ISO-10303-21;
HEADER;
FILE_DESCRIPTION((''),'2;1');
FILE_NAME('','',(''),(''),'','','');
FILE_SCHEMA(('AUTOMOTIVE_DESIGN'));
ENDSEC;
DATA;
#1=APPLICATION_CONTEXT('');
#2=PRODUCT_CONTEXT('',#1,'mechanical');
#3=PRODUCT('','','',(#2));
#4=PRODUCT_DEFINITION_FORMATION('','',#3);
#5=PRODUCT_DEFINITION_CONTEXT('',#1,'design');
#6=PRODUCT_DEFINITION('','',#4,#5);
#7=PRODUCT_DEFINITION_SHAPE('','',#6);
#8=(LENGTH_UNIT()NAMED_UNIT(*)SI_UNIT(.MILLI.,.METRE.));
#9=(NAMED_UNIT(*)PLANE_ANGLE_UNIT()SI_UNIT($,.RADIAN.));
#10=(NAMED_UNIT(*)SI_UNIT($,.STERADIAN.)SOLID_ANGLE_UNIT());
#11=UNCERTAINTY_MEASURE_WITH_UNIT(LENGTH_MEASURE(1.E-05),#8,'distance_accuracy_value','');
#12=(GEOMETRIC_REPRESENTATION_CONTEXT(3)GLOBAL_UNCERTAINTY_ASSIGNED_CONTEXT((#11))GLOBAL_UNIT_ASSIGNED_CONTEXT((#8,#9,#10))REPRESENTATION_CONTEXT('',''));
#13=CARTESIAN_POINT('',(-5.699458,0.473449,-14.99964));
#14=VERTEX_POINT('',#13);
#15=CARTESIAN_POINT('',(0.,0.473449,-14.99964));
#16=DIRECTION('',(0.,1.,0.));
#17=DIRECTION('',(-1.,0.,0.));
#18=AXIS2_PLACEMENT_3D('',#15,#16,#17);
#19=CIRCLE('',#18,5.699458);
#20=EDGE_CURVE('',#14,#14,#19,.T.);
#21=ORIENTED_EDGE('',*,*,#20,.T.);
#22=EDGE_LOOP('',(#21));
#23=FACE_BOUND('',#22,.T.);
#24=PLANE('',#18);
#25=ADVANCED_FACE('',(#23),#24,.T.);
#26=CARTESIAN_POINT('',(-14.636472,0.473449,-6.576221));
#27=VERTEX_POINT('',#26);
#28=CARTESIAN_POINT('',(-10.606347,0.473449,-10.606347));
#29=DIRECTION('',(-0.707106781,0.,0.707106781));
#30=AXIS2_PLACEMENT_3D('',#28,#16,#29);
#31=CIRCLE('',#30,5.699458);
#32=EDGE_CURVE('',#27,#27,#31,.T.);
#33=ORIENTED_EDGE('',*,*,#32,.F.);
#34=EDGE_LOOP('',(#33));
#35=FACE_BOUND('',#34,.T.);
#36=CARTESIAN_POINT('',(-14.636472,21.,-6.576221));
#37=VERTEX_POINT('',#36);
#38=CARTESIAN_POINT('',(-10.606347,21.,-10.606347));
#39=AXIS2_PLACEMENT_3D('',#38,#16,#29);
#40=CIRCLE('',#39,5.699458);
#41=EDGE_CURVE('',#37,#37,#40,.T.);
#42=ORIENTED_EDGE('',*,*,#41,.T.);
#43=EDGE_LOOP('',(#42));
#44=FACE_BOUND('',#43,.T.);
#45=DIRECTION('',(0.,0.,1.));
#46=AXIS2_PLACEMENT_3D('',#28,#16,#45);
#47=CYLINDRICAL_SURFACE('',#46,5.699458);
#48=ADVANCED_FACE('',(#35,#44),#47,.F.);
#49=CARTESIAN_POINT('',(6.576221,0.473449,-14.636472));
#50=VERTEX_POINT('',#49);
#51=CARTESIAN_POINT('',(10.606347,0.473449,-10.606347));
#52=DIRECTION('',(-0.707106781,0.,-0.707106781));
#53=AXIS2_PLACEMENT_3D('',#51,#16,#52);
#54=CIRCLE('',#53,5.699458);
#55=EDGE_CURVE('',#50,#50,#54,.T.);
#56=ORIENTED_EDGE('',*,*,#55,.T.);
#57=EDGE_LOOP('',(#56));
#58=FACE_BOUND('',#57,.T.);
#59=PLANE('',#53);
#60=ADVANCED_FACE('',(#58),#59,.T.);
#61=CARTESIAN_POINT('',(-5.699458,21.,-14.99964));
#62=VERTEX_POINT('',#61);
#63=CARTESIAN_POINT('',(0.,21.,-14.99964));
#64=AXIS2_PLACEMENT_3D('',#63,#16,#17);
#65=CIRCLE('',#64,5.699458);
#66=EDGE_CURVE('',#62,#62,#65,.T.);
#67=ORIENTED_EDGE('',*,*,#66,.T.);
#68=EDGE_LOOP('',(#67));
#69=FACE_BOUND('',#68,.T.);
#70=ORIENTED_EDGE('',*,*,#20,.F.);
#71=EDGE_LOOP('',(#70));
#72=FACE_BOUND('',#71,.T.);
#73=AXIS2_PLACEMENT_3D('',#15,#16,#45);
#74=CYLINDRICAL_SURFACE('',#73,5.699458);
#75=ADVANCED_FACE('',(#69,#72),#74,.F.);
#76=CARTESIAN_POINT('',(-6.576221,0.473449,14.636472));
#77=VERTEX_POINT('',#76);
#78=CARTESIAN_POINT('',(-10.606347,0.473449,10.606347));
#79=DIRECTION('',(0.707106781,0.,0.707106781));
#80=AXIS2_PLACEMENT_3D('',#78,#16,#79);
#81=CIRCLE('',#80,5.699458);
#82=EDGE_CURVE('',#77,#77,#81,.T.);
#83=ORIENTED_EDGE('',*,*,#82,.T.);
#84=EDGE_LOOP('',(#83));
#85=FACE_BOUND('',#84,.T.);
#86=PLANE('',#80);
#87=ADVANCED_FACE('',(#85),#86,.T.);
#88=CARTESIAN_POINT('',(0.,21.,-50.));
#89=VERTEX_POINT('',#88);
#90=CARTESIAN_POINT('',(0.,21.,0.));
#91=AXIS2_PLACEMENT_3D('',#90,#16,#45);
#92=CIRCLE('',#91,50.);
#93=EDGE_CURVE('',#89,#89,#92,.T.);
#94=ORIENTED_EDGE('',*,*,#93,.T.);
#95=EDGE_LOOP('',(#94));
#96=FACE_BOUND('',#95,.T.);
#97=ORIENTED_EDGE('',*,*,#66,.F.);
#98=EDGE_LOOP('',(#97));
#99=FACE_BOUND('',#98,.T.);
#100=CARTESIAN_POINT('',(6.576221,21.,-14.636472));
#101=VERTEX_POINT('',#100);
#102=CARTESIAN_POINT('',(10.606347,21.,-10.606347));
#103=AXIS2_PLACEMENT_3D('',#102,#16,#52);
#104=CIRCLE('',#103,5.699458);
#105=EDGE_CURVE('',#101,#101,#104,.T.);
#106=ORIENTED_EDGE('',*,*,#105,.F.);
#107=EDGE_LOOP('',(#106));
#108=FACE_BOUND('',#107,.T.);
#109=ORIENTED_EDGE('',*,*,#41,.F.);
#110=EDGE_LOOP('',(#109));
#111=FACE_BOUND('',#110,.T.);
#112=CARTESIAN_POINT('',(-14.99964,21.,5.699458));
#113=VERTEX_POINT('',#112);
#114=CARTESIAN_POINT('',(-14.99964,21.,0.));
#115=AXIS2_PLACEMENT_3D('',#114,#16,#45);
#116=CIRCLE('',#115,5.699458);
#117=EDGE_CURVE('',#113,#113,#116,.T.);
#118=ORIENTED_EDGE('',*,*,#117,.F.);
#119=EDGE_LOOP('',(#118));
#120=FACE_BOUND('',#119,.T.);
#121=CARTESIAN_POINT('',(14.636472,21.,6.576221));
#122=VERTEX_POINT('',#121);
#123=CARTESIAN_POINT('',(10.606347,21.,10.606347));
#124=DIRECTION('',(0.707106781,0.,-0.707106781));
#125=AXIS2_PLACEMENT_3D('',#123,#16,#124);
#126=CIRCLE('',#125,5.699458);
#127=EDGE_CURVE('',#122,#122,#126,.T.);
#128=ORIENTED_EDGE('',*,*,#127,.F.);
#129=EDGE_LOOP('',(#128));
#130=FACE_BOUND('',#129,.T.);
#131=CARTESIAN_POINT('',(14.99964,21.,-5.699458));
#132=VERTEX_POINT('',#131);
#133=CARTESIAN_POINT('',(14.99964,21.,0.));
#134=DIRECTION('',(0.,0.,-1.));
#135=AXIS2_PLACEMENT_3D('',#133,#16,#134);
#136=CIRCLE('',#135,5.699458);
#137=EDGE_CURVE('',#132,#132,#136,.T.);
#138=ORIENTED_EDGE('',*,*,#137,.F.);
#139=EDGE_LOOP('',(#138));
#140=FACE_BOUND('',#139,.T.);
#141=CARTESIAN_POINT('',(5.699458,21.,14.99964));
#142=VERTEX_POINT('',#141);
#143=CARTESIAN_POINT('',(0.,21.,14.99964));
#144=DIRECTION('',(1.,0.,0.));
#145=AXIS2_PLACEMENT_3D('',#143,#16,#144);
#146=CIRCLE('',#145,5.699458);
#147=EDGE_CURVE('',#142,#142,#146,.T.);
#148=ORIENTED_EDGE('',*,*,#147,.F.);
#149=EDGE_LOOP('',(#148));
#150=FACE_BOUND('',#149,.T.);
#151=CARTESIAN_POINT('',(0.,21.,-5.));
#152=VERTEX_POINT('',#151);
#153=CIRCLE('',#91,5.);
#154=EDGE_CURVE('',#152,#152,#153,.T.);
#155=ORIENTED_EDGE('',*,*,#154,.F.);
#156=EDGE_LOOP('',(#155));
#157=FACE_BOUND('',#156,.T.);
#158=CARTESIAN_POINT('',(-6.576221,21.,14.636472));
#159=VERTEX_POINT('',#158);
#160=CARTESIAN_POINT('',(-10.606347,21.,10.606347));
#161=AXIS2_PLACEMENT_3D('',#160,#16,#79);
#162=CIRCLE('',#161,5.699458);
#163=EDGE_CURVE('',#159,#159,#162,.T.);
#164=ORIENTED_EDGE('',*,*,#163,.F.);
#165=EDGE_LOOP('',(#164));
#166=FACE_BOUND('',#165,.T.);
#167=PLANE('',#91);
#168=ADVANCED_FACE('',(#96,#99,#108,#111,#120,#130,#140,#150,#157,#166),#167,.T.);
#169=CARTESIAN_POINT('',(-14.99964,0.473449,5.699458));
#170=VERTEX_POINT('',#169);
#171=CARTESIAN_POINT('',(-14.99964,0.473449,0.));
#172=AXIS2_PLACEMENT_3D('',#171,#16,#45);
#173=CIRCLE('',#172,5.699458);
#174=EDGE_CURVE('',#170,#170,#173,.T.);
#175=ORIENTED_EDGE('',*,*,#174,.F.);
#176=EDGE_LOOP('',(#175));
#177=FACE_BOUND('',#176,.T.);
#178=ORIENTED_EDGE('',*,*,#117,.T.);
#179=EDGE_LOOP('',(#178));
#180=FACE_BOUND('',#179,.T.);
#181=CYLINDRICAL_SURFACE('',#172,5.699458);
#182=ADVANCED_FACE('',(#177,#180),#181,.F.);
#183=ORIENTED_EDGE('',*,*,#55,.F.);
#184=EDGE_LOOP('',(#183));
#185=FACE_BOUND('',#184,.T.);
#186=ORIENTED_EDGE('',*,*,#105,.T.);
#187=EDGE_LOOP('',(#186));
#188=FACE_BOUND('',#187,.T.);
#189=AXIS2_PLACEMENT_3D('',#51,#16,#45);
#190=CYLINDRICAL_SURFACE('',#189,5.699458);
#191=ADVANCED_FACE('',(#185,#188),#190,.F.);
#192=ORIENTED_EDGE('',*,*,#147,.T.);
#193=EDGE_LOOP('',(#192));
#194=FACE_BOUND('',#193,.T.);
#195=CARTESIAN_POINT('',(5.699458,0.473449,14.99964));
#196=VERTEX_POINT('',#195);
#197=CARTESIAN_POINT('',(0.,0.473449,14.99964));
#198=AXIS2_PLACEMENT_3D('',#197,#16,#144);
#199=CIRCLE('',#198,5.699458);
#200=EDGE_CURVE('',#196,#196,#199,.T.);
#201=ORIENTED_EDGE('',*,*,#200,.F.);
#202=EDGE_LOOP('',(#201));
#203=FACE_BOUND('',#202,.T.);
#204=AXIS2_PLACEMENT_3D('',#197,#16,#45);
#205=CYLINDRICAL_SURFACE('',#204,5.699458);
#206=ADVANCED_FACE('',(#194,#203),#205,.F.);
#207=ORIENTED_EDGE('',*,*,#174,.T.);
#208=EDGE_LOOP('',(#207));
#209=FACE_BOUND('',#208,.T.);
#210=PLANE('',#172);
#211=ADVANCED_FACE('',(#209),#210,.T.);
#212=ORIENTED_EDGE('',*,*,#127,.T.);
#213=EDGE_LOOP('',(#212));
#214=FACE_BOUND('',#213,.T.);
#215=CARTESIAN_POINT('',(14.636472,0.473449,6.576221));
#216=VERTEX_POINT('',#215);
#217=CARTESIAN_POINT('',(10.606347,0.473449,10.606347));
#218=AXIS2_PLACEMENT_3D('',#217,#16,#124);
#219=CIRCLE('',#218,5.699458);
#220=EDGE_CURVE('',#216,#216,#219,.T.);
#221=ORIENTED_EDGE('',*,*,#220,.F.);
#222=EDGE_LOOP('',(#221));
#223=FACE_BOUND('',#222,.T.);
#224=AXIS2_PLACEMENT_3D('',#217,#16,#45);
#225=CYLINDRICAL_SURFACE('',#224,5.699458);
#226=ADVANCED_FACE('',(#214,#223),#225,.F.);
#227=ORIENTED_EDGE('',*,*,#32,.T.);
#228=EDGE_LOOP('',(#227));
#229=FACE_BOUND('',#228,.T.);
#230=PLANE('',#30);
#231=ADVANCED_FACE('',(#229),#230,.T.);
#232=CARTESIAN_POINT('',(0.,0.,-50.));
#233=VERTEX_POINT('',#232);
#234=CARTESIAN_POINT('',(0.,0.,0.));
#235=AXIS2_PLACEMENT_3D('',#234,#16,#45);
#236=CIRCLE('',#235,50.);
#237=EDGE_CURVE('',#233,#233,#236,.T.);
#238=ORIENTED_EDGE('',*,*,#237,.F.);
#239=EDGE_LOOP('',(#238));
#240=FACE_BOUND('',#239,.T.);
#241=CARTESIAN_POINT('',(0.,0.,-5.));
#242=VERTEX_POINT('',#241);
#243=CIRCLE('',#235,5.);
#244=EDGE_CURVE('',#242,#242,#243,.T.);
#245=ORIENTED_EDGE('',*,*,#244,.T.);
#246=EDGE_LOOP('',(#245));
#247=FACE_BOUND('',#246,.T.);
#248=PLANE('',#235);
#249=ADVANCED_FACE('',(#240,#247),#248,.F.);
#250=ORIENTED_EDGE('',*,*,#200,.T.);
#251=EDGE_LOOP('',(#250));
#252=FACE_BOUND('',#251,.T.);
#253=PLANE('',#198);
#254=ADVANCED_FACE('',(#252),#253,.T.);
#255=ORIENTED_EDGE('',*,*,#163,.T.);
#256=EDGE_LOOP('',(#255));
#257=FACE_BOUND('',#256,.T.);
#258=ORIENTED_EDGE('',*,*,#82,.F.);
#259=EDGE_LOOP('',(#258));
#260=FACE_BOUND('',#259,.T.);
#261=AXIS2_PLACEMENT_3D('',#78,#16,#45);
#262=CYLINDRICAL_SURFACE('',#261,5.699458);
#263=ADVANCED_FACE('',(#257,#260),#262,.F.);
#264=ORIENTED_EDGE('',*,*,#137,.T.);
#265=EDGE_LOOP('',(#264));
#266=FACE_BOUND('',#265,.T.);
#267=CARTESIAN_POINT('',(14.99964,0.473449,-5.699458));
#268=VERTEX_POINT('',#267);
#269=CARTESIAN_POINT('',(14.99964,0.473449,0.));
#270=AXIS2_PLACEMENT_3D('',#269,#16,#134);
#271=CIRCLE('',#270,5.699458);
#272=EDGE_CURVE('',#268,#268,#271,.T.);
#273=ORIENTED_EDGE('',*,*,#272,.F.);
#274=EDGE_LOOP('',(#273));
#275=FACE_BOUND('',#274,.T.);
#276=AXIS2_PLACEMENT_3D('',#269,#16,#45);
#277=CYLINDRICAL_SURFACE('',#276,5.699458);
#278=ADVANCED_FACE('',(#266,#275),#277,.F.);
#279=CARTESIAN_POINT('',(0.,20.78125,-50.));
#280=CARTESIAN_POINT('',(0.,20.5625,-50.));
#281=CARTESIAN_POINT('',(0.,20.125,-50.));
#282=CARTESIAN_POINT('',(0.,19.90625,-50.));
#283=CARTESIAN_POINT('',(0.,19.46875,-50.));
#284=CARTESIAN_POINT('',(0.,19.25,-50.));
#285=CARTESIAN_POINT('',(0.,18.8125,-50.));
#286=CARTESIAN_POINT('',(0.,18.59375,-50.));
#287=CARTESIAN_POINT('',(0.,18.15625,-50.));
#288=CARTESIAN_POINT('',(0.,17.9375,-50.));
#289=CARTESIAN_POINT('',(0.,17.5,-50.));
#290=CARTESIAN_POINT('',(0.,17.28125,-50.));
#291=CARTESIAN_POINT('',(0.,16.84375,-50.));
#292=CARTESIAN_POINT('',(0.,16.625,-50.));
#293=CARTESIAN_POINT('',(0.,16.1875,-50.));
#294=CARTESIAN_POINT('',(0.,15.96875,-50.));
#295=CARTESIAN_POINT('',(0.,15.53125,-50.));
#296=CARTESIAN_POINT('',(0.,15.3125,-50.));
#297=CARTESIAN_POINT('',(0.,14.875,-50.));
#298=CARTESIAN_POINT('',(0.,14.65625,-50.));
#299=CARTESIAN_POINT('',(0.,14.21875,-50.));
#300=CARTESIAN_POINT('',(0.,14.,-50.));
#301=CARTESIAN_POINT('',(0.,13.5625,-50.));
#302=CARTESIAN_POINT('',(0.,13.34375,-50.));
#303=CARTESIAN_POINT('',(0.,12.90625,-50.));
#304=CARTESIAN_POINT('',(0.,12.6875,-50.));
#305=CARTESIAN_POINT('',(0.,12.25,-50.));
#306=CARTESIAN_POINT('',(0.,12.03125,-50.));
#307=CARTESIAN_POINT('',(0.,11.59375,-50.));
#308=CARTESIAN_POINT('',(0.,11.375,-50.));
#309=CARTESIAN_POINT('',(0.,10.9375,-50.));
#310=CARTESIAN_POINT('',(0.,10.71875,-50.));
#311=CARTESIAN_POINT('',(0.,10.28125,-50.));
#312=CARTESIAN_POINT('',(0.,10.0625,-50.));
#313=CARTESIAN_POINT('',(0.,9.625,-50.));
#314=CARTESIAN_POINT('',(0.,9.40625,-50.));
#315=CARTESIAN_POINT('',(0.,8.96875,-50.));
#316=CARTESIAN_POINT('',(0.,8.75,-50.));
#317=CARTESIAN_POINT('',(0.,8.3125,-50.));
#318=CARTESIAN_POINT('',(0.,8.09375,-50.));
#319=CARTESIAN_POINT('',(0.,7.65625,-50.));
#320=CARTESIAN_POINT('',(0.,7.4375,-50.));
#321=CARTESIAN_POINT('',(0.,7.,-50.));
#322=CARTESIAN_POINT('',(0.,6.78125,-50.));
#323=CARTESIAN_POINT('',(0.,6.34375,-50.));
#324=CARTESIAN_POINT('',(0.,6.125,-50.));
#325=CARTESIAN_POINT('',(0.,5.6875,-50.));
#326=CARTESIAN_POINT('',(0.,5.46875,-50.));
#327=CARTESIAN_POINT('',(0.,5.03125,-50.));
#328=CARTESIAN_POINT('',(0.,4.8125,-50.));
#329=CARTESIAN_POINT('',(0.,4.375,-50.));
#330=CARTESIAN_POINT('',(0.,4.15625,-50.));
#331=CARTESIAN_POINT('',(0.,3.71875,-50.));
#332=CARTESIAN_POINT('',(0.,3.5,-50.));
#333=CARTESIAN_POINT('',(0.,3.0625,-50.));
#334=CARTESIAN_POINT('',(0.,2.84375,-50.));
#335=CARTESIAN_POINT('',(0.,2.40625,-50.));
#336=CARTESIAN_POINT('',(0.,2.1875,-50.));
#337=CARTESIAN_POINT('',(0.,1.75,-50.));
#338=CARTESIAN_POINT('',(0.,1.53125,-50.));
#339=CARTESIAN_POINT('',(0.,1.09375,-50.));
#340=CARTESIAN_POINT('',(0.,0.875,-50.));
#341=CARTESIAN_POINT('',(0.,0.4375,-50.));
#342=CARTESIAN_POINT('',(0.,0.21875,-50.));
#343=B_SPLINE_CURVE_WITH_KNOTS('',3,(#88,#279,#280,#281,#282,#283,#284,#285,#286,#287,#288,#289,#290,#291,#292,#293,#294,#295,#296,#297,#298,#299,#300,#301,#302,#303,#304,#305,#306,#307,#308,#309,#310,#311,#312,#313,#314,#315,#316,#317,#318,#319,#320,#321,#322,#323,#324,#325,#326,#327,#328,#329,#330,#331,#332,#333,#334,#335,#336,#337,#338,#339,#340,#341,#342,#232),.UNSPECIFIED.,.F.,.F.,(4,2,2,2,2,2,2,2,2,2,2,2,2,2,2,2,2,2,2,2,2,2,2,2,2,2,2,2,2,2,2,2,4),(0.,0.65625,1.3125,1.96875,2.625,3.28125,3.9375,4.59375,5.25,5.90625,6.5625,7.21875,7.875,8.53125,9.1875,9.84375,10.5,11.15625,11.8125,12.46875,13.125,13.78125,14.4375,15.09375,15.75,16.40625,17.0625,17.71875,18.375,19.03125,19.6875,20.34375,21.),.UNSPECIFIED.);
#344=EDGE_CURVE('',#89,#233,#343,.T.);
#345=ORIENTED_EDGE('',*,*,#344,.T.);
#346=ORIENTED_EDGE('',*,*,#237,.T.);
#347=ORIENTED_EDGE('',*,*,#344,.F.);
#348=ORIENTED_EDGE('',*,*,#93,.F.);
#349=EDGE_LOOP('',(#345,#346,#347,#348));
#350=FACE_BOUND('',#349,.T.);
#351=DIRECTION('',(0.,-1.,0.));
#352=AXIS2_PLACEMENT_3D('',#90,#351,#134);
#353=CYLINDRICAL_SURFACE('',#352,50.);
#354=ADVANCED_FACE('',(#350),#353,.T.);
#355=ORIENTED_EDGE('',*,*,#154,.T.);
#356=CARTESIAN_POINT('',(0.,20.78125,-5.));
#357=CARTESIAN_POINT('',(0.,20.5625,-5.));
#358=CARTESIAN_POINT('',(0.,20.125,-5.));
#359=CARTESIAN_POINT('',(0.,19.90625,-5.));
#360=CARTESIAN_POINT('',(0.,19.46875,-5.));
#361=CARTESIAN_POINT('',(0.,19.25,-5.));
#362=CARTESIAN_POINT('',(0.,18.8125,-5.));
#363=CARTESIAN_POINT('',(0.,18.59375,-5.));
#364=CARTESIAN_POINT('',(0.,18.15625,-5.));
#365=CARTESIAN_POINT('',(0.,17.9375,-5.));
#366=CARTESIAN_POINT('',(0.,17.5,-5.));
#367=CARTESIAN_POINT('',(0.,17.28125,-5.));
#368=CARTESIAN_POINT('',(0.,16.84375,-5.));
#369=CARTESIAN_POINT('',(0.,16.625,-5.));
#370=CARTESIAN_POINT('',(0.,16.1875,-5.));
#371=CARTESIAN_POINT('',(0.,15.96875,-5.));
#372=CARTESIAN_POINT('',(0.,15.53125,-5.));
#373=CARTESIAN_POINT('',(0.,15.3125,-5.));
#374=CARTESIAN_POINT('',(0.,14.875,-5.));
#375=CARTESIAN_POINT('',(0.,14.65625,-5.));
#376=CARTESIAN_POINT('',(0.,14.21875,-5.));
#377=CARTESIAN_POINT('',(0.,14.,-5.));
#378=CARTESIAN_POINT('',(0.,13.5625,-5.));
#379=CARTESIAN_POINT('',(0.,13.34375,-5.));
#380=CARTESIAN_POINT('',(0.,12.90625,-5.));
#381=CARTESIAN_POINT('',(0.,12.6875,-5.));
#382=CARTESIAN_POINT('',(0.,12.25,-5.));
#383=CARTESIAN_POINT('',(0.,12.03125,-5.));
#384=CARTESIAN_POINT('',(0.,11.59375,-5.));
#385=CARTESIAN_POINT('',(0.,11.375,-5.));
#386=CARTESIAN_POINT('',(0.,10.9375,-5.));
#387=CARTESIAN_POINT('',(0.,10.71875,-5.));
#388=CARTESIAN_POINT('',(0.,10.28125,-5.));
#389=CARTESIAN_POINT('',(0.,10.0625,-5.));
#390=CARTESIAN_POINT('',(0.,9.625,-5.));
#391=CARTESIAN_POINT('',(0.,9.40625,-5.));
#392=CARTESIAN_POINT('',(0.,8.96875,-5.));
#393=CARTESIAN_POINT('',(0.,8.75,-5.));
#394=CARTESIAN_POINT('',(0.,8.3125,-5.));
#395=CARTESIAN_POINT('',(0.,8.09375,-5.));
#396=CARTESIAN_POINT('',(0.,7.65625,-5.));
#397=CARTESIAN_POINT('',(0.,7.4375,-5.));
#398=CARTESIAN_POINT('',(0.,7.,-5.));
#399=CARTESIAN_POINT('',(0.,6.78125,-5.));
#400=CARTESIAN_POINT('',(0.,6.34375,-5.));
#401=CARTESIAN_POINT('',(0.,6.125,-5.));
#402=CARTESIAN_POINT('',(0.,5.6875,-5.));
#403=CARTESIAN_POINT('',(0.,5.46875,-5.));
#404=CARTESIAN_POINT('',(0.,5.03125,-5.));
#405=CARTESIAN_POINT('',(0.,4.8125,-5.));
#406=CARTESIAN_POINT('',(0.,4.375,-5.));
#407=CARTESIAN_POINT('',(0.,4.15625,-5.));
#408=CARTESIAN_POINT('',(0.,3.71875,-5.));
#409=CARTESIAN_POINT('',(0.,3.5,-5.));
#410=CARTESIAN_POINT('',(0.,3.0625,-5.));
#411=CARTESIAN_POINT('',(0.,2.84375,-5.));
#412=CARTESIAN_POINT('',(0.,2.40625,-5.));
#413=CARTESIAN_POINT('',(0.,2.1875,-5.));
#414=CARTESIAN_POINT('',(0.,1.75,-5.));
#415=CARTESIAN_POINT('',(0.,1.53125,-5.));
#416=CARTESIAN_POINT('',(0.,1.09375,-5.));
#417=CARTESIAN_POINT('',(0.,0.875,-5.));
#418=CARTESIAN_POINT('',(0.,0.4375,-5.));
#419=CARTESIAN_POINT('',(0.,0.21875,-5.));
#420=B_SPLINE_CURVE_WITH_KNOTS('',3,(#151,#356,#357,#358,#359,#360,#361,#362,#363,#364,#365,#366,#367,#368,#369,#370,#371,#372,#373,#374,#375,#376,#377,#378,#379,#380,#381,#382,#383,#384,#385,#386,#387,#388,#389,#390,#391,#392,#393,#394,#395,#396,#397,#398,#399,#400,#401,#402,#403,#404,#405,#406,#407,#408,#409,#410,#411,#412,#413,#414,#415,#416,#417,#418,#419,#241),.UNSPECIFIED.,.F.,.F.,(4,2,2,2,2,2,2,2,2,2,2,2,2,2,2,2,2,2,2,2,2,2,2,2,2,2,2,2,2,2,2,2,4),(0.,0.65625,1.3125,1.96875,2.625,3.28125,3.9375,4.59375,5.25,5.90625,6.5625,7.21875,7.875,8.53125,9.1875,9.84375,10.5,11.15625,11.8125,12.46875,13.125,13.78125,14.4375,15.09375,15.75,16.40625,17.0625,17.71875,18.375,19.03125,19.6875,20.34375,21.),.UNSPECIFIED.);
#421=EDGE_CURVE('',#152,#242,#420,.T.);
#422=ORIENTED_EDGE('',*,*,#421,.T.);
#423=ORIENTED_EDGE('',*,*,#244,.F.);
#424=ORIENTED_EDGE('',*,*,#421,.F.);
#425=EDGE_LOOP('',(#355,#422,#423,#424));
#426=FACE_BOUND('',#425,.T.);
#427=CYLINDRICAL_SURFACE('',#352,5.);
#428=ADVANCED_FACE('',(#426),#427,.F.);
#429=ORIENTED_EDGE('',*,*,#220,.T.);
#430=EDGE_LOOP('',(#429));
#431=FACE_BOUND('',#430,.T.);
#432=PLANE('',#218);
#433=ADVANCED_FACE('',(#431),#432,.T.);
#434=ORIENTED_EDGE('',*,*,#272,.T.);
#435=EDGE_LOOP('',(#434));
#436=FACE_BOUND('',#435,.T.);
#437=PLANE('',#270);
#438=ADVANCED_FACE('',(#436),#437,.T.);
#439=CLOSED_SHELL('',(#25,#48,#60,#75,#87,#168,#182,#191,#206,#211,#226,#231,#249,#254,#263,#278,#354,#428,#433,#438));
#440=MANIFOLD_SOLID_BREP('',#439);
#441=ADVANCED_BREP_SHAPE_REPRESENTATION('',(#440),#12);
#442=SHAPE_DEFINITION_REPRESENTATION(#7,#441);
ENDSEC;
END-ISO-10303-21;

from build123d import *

# Parameters (mm, degrees)
SKETCH1_R           = 50
BOSS_EXTRUDE1_DEPTH = 21
SKETCH2_R           = 5
CUT_EXTRUDE1_DEPTH  = 74.763134424
SKETCH3_R           = 5.699457957
CUT_EXTRUDE2_DEPTH  = 20.526550641
CIRPATTERN1_COUNT   = 8


with BuildPart() as part:
    # Sketch1 → Boss-Extrude1 (new body)
    with BuildSketch(Plane(origin=(0, 0, 0), x_dir=(1, 0, 0), z_dir=(0, 1, 0))):
        Circle(SKETCH1_R)
    extrude(amount=BOSS_EXTRUDE1_DEPTH)

    # Sketch2 → Cut-Extrude1 (cut, through all)
    with BuildSketch(Plane(origin=(0, 0, 0), x_dir=(1, 0, 0), z_dir=(0, 1, 0))):
        Circle(SKETCH2_R)
    extrude(amount=CUT_EXTRUDE1_DEPTH, mode=Mode.SUBTRACT)

    # Sketch3 → Cut-Extrude2 (cut)
    with BuildSketch(Plane(origin=(0, 21, 0), x_dir=(1, 0, 0), z_dir=(0, 1, 0))):
        with Locations((-14.999639577, 0)):
            Circle(SKETCH3_R)
    cut_extrude2 = extrude(amount=-CUT_EXTRUDE2_DEPTH, mode=Mode.SUBTRACT)

    # CirPattern1: Cut-Extrude2 ×8 about axis
    cirpattern1_axis = Axis((0, 0, 0), (0, 1, 0))
    for i in range(1, CIRPATTERN1_COUNT):
        add(cut_extrude2.rotate(cirpattern1_axis, i * 360 / CIRPATTERN1_COUNT), mode=Mode.SUBTRACT)


solid = part.part
